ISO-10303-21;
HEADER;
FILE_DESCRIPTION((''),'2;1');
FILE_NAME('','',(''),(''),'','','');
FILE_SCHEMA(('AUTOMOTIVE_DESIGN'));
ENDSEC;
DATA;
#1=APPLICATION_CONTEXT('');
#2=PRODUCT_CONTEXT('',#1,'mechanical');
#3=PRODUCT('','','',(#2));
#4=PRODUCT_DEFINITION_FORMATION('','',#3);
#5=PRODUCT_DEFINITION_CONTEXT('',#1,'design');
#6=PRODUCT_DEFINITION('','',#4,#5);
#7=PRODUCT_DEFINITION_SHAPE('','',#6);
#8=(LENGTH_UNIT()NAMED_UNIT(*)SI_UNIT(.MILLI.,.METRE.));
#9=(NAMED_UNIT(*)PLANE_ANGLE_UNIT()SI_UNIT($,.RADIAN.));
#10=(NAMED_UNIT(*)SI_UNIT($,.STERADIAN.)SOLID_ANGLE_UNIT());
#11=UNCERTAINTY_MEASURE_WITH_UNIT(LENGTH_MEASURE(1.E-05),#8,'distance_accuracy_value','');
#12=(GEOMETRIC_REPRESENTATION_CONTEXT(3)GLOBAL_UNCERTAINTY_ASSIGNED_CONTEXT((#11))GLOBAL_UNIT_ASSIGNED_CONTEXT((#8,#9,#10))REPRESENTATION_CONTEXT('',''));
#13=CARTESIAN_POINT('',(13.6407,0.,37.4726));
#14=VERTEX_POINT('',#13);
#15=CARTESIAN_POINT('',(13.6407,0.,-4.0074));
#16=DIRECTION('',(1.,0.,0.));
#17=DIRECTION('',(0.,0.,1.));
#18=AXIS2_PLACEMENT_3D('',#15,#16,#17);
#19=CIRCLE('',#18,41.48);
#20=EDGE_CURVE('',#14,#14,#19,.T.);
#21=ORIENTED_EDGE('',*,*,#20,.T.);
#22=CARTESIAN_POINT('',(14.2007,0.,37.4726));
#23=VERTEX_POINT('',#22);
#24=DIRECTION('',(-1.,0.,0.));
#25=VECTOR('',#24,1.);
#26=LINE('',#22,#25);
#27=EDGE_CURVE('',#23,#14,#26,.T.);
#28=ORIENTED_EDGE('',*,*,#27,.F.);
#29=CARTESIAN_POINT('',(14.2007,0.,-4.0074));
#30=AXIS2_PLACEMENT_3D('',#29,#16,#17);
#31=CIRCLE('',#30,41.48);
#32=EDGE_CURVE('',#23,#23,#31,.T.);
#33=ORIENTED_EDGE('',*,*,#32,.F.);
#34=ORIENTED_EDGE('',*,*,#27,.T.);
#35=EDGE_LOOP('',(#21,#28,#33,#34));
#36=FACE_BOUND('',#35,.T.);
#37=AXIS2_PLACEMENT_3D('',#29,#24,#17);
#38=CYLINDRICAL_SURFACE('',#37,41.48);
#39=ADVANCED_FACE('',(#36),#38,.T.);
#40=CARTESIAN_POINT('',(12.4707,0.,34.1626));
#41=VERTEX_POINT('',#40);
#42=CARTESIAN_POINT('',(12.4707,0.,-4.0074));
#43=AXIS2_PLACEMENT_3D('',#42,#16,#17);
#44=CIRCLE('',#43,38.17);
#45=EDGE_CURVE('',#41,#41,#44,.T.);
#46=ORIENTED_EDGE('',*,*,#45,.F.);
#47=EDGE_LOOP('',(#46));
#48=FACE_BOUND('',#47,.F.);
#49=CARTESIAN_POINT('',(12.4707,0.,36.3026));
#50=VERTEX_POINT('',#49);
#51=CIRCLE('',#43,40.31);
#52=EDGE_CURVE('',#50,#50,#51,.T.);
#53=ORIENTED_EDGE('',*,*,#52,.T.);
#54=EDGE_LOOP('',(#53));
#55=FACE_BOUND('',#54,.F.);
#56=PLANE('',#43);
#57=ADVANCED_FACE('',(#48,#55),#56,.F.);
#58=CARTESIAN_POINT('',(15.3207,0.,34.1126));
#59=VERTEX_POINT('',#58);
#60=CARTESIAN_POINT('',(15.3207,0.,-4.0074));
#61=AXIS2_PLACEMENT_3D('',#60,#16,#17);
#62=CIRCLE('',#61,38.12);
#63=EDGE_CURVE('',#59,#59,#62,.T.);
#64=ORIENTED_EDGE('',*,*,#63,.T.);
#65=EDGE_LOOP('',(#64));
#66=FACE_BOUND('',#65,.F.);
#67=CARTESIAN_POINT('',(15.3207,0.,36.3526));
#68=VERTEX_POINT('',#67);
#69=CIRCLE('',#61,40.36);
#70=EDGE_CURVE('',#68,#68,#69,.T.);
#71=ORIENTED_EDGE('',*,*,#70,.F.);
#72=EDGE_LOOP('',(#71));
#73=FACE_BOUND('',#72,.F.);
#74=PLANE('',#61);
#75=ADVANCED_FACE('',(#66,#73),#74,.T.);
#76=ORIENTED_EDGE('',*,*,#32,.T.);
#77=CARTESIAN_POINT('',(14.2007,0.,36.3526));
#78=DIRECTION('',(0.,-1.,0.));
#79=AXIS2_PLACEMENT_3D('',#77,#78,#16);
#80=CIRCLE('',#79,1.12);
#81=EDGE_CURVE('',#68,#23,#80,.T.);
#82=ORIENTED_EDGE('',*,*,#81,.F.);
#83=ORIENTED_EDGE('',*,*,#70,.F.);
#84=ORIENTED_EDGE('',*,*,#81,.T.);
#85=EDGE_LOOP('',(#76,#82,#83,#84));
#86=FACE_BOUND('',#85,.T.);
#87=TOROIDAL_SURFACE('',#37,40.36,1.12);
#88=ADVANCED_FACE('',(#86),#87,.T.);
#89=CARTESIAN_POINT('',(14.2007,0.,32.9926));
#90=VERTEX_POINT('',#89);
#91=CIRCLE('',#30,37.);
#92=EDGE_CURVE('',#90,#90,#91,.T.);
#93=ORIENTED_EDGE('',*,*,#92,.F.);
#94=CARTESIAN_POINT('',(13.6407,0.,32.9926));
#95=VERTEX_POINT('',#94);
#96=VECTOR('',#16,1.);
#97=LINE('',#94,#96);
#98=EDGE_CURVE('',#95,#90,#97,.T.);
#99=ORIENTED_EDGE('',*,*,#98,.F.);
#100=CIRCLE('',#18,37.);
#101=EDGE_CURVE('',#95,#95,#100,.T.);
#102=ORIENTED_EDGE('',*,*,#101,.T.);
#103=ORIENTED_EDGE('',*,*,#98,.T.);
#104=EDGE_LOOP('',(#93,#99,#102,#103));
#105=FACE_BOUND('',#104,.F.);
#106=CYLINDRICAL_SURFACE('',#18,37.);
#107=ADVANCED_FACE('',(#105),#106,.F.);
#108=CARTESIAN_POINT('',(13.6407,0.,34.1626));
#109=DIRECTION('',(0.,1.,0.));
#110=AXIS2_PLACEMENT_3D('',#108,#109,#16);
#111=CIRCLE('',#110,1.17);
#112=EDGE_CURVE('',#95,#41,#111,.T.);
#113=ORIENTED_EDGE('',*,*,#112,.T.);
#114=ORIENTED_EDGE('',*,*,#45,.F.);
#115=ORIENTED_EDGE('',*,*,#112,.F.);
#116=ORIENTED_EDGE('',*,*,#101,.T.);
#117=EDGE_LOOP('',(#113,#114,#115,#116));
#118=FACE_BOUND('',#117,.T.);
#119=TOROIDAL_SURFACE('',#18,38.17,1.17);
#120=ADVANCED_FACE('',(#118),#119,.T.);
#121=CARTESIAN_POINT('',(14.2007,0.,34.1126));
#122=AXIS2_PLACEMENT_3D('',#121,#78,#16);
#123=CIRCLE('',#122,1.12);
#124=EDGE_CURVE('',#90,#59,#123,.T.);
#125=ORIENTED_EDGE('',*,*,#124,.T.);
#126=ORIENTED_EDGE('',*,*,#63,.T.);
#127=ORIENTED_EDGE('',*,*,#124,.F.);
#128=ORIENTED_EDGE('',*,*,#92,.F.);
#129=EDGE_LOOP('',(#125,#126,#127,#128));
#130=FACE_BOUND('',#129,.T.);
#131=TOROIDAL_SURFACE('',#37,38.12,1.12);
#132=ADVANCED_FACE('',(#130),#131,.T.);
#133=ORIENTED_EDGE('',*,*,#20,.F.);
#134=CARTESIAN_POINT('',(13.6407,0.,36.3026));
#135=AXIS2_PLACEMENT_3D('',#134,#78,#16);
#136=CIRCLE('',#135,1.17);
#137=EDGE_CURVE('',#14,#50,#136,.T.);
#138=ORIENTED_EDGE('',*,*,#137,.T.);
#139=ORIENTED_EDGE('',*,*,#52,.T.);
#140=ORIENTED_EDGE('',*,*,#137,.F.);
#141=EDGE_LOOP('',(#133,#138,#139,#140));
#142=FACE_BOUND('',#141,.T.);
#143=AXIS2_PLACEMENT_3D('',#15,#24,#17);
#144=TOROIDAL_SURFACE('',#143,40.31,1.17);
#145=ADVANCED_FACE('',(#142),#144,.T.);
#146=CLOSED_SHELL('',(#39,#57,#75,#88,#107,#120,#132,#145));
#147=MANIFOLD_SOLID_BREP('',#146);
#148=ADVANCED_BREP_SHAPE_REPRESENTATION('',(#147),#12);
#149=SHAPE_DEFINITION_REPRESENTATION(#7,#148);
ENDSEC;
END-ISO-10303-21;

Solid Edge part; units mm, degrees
sketch "Sketch1" plane through (0, 0, 0) normal (0, -1, 0) x (1, 0, 0)
  arc A0 (14.2007, 32.9926) -> (15.3207, 34.1126) centre (14.2007, 34.1126) ccw
  line L0 (15.3207, 34.1126) -> (15.3207, 36.3526)
  arc A1 (15.3207, 36.3526) -> (14.2007, 37.4726) centre (14.2007, 36.3526) ccw
  line L1 (14.2007, 37.4726) -> (13.6407, 37.4726)
  arc A2 (13.6407, 37.4726) -> (12.4707, 36.3026) centre (13.6407, 36.3026) ccw
  line L2 (12.4707, 36.3026) -> (12.4707, 34.1626)
  arc A3 (13.6407, 32.9926) -> (12.4707, 34.1626) centre (13.6407, 34.1626) cw
  line L3 (13.6407, 32.9926) -> (14.2007, 32.9926)
revolve "RevolvedProtrusion1" add sketch "Sketch1" angle 360 about axis through (13.9207, 0, -4.0074) along (1, 0, 0)
